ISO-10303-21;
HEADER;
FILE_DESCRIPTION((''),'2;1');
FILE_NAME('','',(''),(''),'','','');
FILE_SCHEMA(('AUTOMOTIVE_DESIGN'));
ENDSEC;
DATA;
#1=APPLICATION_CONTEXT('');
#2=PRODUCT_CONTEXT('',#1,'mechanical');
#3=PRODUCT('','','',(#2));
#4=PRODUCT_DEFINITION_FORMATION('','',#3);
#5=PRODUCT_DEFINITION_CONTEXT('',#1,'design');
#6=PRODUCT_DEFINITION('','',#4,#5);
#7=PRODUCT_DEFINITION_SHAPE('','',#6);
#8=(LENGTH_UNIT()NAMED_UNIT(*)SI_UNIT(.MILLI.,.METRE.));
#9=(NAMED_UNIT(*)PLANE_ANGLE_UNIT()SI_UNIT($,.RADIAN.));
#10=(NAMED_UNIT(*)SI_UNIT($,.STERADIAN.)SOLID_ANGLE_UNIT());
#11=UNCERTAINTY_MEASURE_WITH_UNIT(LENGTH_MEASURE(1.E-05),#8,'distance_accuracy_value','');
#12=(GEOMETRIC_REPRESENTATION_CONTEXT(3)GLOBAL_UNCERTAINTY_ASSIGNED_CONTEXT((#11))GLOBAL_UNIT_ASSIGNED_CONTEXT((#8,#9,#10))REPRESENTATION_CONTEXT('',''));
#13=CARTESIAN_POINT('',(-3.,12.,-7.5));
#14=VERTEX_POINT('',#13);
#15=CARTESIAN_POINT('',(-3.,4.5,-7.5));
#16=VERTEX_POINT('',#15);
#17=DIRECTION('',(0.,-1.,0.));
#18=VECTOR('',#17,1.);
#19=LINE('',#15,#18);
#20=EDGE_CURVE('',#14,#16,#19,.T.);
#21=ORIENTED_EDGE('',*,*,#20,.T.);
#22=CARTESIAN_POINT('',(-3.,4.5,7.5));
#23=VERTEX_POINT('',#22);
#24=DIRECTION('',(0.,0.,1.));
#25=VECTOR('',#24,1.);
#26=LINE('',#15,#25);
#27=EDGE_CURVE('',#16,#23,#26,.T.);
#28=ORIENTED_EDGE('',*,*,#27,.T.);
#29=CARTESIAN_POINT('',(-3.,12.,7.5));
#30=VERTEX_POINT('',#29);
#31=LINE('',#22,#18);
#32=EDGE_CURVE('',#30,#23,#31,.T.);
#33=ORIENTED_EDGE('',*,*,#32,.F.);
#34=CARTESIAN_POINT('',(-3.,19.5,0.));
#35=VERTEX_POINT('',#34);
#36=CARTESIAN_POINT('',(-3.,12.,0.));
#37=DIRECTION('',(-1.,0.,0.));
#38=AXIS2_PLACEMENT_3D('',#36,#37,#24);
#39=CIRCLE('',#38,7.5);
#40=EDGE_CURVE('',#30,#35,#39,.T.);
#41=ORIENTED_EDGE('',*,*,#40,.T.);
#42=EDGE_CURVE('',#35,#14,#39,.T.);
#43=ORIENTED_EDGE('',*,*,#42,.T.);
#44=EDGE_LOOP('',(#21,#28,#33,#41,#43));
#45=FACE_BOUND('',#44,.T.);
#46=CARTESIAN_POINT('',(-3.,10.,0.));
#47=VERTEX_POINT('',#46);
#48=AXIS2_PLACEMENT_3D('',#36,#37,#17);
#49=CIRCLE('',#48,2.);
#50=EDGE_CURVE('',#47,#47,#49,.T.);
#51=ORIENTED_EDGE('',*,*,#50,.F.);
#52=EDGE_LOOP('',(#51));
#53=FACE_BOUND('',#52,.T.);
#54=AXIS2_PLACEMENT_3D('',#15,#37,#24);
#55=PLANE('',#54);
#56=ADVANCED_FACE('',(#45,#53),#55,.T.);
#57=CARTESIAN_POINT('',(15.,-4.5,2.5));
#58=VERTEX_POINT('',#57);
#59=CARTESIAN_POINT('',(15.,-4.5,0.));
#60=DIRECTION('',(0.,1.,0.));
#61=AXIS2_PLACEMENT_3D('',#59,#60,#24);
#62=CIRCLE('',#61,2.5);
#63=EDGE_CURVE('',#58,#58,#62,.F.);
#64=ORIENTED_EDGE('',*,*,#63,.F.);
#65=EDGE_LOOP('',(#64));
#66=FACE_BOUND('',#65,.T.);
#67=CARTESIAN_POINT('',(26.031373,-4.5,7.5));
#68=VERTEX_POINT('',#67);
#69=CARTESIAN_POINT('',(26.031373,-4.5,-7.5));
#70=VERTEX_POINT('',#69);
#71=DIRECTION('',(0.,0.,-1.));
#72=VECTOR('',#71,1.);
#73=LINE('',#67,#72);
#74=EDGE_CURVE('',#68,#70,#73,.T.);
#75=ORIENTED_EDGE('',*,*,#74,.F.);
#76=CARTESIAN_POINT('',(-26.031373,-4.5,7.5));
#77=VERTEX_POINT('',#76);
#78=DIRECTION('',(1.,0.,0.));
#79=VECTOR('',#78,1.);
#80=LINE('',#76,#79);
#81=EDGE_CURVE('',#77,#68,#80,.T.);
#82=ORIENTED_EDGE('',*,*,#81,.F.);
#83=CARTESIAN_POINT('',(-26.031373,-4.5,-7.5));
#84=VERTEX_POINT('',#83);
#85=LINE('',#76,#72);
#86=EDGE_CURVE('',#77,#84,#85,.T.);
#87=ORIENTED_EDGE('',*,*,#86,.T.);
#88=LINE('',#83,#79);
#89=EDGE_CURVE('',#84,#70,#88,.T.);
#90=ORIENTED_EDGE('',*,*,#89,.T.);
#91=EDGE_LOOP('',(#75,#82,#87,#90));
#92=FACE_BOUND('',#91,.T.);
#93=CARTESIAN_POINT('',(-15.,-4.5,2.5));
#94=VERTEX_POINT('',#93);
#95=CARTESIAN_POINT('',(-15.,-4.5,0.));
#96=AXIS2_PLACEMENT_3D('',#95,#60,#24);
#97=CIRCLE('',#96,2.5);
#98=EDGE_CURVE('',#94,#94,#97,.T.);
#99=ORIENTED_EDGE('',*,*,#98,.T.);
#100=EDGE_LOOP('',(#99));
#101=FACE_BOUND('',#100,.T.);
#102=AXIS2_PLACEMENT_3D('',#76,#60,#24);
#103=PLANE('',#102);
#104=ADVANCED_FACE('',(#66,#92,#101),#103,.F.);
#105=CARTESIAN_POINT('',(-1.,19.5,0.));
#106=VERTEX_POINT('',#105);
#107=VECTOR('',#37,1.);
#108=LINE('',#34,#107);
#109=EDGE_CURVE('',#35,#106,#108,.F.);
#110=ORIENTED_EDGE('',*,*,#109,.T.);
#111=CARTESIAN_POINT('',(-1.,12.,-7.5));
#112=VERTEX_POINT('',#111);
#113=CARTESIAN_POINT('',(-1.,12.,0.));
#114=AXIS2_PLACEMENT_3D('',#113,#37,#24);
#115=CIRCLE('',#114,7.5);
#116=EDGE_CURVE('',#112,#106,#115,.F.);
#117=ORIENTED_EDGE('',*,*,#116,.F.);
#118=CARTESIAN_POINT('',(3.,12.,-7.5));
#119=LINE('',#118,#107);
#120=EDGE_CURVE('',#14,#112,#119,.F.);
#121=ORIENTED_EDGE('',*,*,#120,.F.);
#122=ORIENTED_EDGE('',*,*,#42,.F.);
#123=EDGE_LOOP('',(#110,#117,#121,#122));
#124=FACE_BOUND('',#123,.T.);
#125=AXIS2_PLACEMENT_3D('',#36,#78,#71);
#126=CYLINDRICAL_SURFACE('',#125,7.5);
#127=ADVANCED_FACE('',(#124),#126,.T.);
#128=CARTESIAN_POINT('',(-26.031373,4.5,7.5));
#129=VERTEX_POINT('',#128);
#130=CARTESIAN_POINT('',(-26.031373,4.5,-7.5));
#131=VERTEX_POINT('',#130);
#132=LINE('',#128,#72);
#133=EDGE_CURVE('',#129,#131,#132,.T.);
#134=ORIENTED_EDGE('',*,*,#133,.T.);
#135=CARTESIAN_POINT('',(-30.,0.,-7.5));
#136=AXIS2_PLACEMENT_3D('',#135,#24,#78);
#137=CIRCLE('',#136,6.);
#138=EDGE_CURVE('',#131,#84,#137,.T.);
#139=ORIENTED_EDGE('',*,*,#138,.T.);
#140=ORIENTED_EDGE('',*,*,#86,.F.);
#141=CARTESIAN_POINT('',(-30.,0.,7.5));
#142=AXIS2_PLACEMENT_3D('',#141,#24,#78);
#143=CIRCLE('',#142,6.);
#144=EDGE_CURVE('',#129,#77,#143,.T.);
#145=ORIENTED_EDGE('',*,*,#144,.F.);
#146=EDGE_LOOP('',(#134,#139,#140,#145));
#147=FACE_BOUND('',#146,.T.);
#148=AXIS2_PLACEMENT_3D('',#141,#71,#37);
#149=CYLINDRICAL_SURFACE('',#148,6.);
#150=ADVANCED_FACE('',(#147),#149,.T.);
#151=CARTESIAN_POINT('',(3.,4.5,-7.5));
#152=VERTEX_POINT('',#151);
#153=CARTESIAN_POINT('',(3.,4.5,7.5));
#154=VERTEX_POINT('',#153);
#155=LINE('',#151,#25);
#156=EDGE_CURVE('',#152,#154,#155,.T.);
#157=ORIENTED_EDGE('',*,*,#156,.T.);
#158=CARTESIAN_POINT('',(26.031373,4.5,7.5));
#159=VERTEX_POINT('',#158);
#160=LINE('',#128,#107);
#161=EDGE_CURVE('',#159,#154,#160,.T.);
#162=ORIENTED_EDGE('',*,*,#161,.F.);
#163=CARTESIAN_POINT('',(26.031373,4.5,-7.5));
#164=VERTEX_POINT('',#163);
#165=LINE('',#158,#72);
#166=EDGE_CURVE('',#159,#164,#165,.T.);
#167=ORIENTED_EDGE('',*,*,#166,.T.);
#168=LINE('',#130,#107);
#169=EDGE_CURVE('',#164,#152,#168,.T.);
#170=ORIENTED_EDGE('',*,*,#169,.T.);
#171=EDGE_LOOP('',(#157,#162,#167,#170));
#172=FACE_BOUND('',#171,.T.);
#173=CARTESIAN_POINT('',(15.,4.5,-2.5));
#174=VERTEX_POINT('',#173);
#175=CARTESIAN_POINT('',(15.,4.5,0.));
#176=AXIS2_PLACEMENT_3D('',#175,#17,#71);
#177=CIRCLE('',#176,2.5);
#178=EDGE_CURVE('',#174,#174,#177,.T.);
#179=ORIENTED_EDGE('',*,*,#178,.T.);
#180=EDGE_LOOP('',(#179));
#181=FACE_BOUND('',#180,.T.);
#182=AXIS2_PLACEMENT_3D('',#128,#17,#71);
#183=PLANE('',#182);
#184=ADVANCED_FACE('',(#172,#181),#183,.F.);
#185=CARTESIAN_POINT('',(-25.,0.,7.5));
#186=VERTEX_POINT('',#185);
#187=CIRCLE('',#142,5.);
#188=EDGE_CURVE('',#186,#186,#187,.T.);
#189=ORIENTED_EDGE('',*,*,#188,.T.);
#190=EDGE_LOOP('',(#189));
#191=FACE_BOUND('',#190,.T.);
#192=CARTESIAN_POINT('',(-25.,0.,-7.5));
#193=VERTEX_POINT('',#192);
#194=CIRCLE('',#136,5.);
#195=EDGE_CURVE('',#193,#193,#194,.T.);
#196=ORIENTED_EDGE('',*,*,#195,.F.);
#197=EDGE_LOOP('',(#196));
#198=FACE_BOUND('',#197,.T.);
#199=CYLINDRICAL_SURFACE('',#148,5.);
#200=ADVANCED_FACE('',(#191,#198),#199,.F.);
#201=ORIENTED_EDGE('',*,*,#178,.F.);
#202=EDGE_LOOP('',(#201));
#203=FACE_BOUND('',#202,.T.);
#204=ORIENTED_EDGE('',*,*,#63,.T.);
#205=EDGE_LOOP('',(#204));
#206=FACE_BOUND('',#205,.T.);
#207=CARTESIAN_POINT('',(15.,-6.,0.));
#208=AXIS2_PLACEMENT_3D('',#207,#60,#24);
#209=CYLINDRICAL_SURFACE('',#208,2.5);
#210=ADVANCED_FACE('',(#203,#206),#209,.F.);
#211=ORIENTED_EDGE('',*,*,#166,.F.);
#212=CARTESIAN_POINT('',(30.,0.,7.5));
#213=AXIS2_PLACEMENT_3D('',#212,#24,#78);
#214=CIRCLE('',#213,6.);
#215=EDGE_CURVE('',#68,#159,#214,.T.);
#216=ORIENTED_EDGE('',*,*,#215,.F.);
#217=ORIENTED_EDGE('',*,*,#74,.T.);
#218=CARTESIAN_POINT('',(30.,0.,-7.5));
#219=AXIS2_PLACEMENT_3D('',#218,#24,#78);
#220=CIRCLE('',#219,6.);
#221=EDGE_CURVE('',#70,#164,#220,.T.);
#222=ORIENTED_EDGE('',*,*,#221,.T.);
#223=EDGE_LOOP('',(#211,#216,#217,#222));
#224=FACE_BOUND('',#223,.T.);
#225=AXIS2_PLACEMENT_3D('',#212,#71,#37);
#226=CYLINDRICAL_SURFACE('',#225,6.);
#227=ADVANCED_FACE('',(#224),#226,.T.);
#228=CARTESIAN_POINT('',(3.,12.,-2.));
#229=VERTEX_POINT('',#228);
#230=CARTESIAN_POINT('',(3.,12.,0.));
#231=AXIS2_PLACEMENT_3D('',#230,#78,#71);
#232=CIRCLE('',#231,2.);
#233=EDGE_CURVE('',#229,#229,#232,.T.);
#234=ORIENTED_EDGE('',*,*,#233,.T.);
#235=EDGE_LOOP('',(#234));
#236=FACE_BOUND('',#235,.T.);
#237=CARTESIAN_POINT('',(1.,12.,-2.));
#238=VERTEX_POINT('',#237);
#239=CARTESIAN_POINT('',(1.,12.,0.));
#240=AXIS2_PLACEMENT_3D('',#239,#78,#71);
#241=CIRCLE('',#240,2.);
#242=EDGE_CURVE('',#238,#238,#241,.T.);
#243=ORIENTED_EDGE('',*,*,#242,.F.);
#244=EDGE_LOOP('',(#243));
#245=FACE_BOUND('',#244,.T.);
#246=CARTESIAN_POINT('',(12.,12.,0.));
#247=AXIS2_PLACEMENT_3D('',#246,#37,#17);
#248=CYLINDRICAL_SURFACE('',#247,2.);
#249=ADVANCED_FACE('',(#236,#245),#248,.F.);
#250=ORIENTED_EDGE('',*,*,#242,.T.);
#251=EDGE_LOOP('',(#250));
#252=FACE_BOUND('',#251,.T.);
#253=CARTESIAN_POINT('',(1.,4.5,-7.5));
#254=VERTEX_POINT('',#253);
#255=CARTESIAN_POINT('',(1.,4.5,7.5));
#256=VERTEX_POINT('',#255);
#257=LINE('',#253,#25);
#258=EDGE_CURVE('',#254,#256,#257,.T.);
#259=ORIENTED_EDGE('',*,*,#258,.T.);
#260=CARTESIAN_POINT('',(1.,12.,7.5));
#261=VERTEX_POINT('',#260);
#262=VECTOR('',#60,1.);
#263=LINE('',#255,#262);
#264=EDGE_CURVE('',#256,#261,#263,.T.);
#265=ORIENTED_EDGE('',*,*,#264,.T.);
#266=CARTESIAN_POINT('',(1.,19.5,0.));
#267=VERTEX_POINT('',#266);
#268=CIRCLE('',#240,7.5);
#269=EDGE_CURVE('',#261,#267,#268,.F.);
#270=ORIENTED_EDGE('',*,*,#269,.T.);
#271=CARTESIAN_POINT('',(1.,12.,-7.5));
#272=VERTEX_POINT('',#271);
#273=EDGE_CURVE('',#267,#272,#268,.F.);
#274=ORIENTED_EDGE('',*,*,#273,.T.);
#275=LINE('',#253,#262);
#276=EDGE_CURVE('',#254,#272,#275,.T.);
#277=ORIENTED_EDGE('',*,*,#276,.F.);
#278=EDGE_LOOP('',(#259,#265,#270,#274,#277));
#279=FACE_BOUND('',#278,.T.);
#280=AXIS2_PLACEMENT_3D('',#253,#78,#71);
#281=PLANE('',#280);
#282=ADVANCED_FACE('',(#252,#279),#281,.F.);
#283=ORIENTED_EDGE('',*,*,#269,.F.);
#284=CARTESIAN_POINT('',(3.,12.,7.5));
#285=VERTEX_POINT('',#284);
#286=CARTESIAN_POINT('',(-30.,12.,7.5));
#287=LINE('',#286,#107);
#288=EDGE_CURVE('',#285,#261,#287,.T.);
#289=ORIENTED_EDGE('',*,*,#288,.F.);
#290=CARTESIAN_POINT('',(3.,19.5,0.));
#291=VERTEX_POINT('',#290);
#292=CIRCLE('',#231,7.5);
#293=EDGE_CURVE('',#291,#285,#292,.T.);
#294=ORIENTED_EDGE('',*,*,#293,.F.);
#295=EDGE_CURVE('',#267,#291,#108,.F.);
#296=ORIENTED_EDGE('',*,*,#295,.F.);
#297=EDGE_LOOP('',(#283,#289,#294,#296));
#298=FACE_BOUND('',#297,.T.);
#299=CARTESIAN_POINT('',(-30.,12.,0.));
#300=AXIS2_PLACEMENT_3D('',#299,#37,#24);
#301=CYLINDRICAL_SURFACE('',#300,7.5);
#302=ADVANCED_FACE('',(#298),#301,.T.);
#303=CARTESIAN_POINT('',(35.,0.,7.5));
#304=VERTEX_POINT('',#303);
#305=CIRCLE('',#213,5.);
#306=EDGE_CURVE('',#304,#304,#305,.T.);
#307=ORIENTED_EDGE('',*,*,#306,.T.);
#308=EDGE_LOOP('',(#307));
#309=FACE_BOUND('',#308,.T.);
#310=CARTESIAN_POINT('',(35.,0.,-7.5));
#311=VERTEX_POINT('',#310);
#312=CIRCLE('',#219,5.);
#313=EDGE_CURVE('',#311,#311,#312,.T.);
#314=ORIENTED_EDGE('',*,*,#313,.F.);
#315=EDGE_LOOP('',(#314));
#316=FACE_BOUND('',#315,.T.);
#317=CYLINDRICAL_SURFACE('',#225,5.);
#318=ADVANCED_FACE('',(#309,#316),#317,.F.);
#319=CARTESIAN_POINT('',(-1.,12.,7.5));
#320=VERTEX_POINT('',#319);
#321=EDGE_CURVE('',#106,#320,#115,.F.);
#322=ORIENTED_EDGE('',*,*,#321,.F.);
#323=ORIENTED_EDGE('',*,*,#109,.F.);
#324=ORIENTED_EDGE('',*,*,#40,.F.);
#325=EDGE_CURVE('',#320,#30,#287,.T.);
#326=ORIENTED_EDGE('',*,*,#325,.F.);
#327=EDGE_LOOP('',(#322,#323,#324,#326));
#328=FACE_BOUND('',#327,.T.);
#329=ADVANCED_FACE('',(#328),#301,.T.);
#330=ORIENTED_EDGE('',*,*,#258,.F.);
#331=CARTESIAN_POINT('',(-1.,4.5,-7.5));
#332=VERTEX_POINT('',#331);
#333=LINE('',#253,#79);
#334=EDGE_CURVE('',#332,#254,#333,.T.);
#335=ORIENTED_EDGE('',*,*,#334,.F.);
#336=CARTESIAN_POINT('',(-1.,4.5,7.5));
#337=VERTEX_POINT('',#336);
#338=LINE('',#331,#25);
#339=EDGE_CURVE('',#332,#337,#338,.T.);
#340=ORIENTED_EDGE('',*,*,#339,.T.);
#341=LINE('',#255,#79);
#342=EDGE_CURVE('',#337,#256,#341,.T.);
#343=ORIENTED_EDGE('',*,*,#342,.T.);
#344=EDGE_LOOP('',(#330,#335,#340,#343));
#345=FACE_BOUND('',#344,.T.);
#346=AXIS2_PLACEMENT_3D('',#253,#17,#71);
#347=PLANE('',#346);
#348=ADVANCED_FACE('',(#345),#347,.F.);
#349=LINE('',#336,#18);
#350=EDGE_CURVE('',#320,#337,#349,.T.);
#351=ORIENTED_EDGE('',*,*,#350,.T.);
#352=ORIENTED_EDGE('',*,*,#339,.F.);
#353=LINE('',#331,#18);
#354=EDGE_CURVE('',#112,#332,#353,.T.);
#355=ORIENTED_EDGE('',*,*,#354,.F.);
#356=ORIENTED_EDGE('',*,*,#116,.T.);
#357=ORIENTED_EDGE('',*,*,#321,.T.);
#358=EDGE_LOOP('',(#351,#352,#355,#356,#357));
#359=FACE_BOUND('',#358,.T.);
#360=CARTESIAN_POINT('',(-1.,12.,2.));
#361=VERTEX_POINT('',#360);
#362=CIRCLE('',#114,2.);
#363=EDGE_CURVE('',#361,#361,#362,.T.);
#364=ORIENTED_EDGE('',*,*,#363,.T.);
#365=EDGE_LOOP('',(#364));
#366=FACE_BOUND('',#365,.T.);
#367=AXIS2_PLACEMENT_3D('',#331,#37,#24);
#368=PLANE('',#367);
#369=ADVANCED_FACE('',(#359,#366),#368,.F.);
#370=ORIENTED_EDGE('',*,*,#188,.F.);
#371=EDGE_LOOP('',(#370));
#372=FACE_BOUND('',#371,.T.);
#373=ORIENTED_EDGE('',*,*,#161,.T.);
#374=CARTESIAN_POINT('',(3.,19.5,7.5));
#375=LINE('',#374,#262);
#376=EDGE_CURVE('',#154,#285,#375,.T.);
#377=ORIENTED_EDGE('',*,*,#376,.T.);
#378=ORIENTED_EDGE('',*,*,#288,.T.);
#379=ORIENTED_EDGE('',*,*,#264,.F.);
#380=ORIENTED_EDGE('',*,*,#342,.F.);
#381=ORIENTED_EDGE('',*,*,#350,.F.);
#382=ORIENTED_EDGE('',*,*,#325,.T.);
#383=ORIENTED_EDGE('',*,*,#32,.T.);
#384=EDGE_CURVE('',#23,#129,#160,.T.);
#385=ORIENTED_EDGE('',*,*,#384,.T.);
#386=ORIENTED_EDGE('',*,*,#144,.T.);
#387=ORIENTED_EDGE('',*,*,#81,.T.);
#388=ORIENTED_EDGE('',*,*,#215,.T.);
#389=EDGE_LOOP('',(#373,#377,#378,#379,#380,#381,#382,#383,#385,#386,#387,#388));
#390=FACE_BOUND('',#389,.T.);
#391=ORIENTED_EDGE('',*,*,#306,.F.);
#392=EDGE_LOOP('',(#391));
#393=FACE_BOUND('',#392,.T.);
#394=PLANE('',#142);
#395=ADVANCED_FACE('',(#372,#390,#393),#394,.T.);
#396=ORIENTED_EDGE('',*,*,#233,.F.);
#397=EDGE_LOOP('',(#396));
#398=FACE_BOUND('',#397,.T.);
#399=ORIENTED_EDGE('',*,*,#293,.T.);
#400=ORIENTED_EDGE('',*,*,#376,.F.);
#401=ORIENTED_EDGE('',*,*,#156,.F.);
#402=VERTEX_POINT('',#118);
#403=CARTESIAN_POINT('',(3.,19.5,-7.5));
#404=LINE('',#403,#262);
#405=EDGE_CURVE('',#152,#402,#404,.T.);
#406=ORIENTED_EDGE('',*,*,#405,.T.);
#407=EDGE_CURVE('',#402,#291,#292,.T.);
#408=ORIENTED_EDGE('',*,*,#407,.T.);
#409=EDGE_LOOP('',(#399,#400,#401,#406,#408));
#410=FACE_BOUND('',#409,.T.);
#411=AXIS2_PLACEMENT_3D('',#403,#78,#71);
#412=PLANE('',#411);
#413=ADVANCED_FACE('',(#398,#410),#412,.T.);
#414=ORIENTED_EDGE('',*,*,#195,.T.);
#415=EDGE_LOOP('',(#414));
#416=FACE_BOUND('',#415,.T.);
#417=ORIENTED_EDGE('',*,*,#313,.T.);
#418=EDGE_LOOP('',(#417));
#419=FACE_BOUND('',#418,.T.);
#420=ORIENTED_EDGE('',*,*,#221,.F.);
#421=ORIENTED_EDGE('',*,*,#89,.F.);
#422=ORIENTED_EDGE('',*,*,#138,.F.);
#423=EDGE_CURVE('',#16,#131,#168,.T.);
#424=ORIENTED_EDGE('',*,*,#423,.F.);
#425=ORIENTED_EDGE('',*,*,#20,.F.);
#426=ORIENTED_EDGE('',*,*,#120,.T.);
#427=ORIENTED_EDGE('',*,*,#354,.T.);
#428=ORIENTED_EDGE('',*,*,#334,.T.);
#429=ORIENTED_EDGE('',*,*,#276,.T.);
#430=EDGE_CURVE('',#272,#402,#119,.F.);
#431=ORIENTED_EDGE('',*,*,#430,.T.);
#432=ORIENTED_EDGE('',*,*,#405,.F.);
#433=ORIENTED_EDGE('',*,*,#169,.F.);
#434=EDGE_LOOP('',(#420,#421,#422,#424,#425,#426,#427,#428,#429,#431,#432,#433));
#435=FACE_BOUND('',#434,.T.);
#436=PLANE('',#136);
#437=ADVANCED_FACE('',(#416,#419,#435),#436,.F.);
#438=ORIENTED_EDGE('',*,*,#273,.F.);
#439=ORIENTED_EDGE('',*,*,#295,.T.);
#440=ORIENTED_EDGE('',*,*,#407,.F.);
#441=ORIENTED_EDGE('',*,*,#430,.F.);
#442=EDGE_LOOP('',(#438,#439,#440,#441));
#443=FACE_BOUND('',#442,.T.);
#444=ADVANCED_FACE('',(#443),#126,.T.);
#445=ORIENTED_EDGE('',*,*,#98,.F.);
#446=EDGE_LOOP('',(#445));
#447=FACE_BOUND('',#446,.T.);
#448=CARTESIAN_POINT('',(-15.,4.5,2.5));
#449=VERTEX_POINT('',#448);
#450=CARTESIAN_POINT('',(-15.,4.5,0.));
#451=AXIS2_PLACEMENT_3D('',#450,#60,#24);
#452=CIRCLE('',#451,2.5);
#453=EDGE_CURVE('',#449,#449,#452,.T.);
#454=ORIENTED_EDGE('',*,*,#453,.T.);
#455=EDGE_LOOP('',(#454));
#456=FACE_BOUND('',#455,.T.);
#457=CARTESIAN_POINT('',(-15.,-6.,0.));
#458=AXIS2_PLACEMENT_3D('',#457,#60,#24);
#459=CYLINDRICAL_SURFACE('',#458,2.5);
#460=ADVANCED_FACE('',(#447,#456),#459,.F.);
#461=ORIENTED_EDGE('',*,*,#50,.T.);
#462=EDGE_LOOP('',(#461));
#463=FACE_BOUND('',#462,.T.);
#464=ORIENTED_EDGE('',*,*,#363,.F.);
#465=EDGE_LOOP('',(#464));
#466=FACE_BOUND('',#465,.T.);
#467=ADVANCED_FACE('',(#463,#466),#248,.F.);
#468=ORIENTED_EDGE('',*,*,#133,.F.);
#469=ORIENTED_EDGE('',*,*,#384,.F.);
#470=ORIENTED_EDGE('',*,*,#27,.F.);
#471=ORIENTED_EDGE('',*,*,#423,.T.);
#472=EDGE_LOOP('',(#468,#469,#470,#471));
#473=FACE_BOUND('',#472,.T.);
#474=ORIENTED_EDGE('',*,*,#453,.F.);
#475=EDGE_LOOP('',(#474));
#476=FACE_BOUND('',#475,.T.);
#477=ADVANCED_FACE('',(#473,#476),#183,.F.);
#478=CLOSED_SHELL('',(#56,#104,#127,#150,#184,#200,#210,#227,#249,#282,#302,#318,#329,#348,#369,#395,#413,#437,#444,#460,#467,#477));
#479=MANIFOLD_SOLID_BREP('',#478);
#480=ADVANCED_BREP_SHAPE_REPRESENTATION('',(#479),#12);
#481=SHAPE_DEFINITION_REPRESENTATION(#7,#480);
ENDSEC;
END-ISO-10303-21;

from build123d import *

# Parameters (mm, degrees)
SKETCH_1_R          = 5
EXTRUDE_1_DEPTH     = 7.5
SKETCH_2_W          = 6
SKETCH_2_H          = 15
EXTRUDE_2_DEPTH     = 15
FILLET_1_R          = 7.5
SKETCH_3_W          = 2
SKETCH_3_H          = 15
CUT_EXTRUDE_1_DEPTH = 44.603325561
SKETCH_4_R          = 2
CUT_EXTRUDE_2_DEPTH = 15
SKETCH_7_R          = 2.5
CUT_EXTRUDE_3_DEPTH = 40.714606885


with BuildPart() as part:
    # 草图1 → 凸台-拉伸1 (new, symmetric)
    with BuildSketch(Plane.XY):
        with BuildLine():
            Line((-26.031373033, 4.5), (26.031373033, 4.5))
            ThreePointArc((26.031373033, 4.5), (36, 0), (26.031373033, -4.5))
            Line((26.031373033, -4.5), (-26.031373033, -4.5))
            ThreePointArc((-26.031373033, -4.5), (-36, 0), (-26.031373033, 4.5))
        make_face()
        with Locations((-30, 0)):
            Circle(SKETCH_1_R, mode=Mode.SUBTRACT)
        with Locations((30, 0)):
            Circle(SKETCH_1_R, mode=Mode.SUBTRACT)
    extrude(amount=EXTRUDE_1_DEPTH, both=True)

    # 草图2 → 凸台-拉伸2 (add)
    with BuildSketch(Plane.XY.offset(7.5)):
        with Locations((0, 12)):
            Rectangle(SKETCH_2_W, SKETCH_2_H)
    extrude(amount=-EXTRUDE_2_DEPTH)

    # 圆角1
    fillet_1_edges = [part.edges().sort_by_distance(p)[0] for p in [
        (0, 19.5, 7.5),
        (0, 19.5, -7.5),
    ]]
    fillet(fillet_1_edges, radius=FILLET_1_R - 0.0001)  # a hair under: the kernel refuses the full size

    # 草图3 → 切除-拉伸1 (cut, through all)
    with BuildSketch(Plane.XY.offset(7.5)):
        with Locations((0, 12)):
            Rectangle(SKETCH_3_W, SKETCH_3_H)
    extrude(amount=-CUT_EXTRUDE_1_DEPTH, mode=Mode.SUBTRACT)

    # 草图4 → 切除-拉伸2 (cut)
    with BuildSketch(Plane.ZY.offset(3)):
        with Locations(Location((0, 12, 0), (0, 0, 270))):
            Circle(SKETCH_4_R)
    extrude(amount=-CUT_EXTRUDE_2_DEPTH, mode=Mode.SUBTRACT)

    # 草图7 → 切除-拉伸3 (cut, through all)
    with BuildSketch(Plane(origin=(0, 4.5, 0), x_dir=(1, 0, 0), z_dir=(0, 1, 0))):
        with Locations(Location((-15, 0, 0), (0, 0, 270))):
            Circle(SKETCH_7_R)
        with Locations(Location((15, 0, 0), (0, 0, 270))):
            Circle(SKETCH_7_R)
    extrude(amount=-CUT_EXTRUDE_3_DEPTH, mode=Mode.SUBTRACT)


solid = part.part
